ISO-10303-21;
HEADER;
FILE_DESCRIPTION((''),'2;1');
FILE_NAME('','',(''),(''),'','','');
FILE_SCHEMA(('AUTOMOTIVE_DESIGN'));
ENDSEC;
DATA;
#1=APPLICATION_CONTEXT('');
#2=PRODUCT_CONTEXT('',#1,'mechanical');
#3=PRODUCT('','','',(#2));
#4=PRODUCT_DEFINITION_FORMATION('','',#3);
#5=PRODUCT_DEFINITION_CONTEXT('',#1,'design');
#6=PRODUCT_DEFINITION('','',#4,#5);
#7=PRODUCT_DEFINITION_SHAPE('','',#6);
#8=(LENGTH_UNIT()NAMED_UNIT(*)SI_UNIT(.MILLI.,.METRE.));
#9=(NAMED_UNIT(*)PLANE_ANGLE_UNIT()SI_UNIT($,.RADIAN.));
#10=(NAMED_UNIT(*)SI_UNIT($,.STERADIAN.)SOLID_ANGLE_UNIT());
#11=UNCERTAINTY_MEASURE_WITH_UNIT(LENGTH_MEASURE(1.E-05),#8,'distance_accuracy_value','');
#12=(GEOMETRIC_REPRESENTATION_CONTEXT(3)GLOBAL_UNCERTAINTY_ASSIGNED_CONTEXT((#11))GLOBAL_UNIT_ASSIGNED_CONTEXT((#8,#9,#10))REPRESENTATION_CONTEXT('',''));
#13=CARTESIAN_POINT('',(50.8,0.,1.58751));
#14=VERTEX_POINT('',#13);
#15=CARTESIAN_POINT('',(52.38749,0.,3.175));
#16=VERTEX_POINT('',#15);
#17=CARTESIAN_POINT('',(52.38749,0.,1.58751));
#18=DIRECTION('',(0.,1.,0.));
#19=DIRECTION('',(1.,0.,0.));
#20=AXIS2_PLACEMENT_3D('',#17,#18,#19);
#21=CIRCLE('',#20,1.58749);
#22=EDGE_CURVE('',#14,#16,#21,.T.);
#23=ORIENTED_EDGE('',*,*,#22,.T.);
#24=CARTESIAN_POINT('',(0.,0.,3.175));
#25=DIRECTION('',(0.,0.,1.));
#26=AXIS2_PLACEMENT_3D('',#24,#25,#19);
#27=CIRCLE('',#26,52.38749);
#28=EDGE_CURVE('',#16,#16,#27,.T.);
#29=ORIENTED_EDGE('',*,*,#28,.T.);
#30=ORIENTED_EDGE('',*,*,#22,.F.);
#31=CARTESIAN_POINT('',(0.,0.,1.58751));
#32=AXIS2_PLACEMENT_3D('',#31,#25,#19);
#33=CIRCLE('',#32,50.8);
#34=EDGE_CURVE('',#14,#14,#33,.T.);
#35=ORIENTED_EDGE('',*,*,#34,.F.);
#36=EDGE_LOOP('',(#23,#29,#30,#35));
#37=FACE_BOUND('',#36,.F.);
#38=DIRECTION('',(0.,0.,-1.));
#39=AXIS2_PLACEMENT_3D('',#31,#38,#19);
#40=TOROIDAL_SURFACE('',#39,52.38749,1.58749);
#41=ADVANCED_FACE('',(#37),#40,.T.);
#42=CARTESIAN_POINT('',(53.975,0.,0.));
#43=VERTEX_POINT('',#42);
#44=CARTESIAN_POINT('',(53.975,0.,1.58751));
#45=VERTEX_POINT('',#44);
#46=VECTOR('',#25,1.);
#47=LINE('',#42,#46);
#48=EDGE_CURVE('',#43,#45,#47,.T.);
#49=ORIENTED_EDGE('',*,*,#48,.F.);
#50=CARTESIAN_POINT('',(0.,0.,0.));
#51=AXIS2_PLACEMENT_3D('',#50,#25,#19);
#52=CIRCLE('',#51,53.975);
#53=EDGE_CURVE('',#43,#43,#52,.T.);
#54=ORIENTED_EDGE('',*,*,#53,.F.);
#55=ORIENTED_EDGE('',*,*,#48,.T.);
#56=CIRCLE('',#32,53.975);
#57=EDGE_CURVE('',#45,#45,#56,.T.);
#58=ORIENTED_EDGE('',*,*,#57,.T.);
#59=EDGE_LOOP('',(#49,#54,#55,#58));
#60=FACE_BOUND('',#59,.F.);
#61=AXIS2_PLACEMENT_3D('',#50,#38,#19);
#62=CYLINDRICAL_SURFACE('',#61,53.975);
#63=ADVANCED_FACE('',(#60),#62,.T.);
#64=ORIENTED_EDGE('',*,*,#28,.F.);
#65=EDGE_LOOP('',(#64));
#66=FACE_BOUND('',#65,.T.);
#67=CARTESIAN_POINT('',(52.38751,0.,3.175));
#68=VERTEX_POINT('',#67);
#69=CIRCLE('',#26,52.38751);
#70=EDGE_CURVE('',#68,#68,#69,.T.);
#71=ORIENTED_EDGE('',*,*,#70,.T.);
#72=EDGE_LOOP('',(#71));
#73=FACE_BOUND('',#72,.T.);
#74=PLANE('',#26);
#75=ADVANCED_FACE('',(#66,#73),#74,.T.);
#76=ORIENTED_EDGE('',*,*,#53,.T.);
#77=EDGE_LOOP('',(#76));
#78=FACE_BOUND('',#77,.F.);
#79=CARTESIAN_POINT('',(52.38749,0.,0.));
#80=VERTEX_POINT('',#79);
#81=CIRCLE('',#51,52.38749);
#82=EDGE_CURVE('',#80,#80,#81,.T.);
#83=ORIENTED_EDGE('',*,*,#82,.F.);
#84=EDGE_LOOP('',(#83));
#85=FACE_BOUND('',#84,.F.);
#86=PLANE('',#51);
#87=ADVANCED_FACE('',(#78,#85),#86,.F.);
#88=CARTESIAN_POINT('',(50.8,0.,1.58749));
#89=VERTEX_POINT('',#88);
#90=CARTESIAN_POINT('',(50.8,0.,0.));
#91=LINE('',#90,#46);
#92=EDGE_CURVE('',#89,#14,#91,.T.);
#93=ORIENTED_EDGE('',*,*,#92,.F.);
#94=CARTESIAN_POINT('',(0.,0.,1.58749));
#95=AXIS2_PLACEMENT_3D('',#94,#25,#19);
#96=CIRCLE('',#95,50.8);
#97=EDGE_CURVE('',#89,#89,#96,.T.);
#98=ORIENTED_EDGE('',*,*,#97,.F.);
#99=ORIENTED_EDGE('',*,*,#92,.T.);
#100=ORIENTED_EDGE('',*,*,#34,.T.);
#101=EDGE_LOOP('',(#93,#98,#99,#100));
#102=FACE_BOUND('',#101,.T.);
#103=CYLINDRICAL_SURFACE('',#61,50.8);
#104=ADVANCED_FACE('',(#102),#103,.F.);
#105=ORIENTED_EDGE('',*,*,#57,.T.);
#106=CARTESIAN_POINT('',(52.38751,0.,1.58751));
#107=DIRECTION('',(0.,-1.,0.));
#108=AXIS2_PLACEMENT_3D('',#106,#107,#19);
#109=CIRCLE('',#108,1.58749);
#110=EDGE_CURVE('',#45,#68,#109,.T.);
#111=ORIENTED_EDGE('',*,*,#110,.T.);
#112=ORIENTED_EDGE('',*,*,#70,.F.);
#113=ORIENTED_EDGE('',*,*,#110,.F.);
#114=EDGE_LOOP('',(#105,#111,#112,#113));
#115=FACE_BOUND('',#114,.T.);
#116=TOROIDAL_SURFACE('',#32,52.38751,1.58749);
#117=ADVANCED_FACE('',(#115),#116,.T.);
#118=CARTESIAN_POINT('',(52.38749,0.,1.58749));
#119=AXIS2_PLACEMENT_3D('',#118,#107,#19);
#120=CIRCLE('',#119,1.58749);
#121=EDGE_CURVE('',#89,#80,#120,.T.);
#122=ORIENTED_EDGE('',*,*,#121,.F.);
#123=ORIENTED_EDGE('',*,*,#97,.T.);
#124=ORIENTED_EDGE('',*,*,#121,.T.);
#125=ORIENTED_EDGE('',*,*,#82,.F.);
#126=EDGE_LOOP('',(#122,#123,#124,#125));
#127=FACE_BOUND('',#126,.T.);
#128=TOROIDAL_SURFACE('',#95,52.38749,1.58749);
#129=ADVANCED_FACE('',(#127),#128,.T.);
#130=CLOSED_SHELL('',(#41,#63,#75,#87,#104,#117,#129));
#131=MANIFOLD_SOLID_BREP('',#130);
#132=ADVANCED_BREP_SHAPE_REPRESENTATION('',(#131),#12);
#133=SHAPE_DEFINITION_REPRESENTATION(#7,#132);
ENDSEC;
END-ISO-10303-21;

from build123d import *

# Parameters (mm, degrees)
F0_R     = 53.975
F0_R_2   = 50.8
F1_DEPTH = 3.175
F2_R     = 1.58749


# Not quite as in the source:
# - a fillet or chamfer is up to 0.001 mm smaller than in the source, because OpenCascade refuses the exact size


with BuildPart() as f1:
    # F0 (on Top) → F1 (new body)
    with BuildSketch(Plane.XY):
        Circle(F0_R)
        Circle(F0_R_2, mode=Mode.SUBTRACT)
    extrude(amount=F1_DEPTH)

    # F2 (radius 1.5875 in the source; OpenCascade refuses exactly that, so slightly less here)
    f2_edges = [f1.edges().sort_by_distance(p)[0] for p in [
        (-50.8, 0, 3.175),
        (-53.975, 0, 3.175),
        (-50.8, 0, 0),
    ]]
    fillet(f2_edges, radius=F2_R)


solid = f1.part
